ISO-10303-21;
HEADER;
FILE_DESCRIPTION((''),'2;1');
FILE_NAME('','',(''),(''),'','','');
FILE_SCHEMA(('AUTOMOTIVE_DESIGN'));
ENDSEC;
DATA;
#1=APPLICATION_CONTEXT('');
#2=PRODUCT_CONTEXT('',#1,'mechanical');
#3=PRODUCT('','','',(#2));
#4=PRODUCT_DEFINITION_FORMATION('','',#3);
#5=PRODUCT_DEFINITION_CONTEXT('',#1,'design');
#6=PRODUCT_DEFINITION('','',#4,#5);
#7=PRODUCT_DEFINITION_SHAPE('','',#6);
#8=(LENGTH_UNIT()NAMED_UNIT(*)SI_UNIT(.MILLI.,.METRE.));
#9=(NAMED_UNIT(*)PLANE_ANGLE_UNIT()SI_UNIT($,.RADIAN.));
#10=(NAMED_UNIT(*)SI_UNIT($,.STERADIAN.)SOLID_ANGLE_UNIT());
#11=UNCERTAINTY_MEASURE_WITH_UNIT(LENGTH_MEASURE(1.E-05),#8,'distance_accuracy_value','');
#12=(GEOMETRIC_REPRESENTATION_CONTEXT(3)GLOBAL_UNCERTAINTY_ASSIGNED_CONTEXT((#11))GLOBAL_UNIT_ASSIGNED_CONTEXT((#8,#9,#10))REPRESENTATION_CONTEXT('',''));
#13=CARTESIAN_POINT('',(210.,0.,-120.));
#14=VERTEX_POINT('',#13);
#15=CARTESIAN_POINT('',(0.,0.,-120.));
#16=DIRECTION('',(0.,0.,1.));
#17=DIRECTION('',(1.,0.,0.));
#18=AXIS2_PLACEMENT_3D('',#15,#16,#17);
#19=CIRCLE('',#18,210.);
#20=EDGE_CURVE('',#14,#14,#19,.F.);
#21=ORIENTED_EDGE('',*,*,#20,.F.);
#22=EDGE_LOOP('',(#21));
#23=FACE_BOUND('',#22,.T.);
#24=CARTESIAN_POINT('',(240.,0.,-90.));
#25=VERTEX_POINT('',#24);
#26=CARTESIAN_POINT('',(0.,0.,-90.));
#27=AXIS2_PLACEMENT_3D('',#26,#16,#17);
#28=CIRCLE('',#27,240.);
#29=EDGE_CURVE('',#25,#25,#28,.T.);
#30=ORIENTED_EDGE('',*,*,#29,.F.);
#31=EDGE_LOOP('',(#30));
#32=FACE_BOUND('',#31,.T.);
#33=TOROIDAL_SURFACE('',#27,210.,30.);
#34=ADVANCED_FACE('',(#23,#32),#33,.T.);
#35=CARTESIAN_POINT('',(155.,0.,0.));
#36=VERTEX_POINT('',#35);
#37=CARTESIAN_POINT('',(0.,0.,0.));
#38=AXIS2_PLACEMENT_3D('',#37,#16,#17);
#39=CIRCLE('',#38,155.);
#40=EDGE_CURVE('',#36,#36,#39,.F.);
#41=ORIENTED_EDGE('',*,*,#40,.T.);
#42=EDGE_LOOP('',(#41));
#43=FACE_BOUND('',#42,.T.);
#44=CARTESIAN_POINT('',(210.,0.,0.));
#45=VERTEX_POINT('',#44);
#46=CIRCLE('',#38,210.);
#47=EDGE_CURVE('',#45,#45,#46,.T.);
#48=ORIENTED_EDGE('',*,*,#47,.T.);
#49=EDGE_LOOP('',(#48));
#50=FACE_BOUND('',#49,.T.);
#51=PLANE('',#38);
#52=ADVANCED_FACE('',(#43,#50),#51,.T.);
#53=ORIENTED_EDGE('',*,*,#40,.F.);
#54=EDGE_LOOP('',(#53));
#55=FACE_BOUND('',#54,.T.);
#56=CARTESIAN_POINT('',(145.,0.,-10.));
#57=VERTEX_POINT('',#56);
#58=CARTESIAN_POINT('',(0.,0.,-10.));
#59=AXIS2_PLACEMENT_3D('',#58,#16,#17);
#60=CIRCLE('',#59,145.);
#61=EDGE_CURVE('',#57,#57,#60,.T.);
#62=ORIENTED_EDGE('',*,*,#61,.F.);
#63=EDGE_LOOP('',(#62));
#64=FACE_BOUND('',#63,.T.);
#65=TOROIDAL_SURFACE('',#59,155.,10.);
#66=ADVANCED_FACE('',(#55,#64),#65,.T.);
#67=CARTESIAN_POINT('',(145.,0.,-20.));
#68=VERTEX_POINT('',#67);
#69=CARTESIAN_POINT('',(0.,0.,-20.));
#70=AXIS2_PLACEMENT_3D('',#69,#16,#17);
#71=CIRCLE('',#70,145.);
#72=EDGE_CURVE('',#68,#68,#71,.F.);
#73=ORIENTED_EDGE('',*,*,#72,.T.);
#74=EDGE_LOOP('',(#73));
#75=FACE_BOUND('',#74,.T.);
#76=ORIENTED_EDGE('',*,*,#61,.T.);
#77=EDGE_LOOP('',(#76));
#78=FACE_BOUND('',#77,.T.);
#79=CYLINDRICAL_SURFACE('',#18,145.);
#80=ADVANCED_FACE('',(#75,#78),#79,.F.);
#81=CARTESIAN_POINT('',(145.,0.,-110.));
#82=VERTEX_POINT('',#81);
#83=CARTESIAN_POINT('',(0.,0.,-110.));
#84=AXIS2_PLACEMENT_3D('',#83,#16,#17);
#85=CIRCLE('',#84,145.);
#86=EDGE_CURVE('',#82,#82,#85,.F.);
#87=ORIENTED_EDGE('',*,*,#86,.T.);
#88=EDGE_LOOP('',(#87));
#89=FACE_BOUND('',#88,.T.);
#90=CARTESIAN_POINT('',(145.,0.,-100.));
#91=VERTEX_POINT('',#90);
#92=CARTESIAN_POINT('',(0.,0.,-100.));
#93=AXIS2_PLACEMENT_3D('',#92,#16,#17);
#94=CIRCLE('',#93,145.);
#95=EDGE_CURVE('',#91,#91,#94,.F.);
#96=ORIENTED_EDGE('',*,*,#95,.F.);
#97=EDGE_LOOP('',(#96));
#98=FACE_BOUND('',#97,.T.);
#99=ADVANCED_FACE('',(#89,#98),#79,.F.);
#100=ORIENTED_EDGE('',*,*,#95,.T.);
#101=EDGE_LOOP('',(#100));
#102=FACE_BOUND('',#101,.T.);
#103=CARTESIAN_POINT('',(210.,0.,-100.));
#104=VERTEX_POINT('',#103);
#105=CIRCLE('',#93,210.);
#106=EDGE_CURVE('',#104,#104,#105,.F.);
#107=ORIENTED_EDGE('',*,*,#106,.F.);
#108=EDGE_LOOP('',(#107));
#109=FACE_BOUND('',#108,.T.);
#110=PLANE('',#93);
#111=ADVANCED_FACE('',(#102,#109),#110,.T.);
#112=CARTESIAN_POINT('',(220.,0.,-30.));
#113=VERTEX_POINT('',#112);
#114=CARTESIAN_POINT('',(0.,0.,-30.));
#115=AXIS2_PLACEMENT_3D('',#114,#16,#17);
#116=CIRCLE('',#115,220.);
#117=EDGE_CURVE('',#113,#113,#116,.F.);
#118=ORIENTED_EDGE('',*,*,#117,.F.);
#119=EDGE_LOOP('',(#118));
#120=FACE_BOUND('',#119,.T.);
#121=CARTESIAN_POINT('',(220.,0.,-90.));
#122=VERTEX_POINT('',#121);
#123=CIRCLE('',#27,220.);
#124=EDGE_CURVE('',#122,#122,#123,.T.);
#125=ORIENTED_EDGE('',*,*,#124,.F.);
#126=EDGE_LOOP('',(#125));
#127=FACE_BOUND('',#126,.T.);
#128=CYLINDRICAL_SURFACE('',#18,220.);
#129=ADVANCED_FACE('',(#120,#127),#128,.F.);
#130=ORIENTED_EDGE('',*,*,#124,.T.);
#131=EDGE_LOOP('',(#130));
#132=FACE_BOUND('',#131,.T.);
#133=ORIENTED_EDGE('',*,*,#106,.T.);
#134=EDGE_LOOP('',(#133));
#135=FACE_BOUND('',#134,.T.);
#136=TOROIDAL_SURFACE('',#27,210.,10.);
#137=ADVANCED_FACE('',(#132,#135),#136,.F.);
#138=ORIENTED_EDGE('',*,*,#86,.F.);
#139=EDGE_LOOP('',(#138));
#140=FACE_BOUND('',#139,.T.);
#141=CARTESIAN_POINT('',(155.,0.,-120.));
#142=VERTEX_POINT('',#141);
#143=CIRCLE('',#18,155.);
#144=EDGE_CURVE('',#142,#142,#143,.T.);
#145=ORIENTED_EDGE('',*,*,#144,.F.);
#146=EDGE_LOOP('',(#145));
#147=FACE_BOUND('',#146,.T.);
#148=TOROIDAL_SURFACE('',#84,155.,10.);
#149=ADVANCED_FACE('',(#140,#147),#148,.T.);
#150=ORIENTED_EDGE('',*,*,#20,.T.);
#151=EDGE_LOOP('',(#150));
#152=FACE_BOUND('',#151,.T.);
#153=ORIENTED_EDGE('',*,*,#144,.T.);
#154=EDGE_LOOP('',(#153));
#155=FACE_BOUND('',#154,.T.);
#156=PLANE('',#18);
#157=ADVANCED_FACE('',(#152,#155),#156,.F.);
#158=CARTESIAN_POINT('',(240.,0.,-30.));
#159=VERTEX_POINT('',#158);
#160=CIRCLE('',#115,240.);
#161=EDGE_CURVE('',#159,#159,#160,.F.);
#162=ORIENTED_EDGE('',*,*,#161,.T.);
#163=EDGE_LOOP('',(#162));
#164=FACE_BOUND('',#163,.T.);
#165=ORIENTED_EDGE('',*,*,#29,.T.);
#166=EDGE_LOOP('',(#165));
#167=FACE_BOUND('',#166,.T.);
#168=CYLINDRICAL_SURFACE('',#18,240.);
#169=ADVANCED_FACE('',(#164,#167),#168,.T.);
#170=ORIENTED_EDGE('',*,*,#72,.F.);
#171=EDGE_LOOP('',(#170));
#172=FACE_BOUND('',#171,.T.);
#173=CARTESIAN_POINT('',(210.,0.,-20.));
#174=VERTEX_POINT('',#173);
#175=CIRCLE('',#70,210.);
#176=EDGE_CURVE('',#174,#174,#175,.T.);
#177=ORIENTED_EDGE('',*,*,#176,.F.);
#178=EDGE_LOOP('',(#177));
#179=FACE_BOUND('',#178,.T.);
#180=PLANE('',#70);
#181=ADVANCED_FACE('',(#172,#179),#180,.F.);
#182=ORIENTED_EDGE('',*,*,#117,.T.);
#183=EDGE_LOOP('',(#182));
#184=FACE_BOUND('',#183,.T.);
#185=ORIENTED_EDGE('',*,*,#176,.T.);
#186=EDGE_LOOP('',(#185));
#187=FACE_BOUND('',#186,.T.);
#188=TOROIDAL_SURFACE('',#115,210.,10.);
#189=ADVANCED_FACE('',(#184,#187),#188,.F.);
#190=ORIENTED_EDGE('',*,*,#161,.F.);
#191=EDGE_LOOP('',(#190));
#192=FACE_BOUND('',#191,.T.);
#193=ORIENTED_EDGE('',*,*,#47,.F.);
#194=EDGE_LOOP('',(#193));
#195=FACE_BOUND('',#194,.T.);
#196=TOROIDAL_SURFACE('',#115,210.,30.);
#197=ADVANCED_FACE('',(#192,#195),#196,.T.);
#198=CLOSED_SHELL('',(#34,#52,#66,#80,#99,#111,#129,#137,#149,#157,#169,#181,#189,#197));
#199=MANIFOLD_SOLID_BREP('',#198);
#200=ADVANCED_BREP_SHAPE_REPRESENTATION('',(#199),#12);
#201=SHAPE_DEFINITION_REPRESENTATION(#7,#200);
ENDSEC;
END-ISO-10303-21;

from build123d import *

# Parameters (mm, degrees)
SKETCH1_R           = 240
SKETCH1_R_2         = 145
EXTRUDE_THIN1_DEPTH = 120
FILLET1_R           = 30
FILLET2_R           = 10
FILLET3_R           = 10


# Read off the part's stored shape, not the designer's step: Shell1
with BuildPart() as part:
    # Sketch1 → Extrude-Thin1 (new body)
    with BuildSketch(Plane.XY):
        Circle(SKETCH1_R)
        Circle(SKETCH1_R_2, mode=Mode.SUBTRACT)
    extrude(amount=-EXTRUDE_THIN1_DEPTH)

    # Fillet1
    fillet1_edges = [part.edges().sort_by_distance(p)[0] for p in [
        (-240, 0, 0),
        (-240, 0, -120),
    ]]
    fillet(fillet1_edges, radius=FILLET1_R)

    # Fillet2
    fillet2_edges = [part.edges().sort_by_distance(p)[0] for p in [
        (-145, 0, 0),
    ]]
    fillet(fillet2_edges, radius=FILLET2_R)

    # Fillet3
    fillet3_edges = [part.edges().sort_by_distance(p)[0] for p in [
        (-145, 0, -120),
    ]]
    fillet(fillet3_edges, radius=FILLET3_R)

    # Shell1 outline → Shell1 (revolve, cut)
    with BuildSketch(Plane.XZ):
        with BuildLine():
            ThreePointArc((210, -100), (217.071067812, -97.071067812), (220, -90))
            Line((220, -90), (220, -30))
            ThreePointArc((220, -30), (217.071067812, -22.928932188), (210, -20))
            Line((210, -20), (145, -20))
            Line((145, -20), (145, -100))
            Line((145, -100), (210, -100))
        make_face()
    revolve(axis=Axis((0, 0, 0), (0, 0, 1)), mode=Mode.SUBTRACT)


solid = part.part
